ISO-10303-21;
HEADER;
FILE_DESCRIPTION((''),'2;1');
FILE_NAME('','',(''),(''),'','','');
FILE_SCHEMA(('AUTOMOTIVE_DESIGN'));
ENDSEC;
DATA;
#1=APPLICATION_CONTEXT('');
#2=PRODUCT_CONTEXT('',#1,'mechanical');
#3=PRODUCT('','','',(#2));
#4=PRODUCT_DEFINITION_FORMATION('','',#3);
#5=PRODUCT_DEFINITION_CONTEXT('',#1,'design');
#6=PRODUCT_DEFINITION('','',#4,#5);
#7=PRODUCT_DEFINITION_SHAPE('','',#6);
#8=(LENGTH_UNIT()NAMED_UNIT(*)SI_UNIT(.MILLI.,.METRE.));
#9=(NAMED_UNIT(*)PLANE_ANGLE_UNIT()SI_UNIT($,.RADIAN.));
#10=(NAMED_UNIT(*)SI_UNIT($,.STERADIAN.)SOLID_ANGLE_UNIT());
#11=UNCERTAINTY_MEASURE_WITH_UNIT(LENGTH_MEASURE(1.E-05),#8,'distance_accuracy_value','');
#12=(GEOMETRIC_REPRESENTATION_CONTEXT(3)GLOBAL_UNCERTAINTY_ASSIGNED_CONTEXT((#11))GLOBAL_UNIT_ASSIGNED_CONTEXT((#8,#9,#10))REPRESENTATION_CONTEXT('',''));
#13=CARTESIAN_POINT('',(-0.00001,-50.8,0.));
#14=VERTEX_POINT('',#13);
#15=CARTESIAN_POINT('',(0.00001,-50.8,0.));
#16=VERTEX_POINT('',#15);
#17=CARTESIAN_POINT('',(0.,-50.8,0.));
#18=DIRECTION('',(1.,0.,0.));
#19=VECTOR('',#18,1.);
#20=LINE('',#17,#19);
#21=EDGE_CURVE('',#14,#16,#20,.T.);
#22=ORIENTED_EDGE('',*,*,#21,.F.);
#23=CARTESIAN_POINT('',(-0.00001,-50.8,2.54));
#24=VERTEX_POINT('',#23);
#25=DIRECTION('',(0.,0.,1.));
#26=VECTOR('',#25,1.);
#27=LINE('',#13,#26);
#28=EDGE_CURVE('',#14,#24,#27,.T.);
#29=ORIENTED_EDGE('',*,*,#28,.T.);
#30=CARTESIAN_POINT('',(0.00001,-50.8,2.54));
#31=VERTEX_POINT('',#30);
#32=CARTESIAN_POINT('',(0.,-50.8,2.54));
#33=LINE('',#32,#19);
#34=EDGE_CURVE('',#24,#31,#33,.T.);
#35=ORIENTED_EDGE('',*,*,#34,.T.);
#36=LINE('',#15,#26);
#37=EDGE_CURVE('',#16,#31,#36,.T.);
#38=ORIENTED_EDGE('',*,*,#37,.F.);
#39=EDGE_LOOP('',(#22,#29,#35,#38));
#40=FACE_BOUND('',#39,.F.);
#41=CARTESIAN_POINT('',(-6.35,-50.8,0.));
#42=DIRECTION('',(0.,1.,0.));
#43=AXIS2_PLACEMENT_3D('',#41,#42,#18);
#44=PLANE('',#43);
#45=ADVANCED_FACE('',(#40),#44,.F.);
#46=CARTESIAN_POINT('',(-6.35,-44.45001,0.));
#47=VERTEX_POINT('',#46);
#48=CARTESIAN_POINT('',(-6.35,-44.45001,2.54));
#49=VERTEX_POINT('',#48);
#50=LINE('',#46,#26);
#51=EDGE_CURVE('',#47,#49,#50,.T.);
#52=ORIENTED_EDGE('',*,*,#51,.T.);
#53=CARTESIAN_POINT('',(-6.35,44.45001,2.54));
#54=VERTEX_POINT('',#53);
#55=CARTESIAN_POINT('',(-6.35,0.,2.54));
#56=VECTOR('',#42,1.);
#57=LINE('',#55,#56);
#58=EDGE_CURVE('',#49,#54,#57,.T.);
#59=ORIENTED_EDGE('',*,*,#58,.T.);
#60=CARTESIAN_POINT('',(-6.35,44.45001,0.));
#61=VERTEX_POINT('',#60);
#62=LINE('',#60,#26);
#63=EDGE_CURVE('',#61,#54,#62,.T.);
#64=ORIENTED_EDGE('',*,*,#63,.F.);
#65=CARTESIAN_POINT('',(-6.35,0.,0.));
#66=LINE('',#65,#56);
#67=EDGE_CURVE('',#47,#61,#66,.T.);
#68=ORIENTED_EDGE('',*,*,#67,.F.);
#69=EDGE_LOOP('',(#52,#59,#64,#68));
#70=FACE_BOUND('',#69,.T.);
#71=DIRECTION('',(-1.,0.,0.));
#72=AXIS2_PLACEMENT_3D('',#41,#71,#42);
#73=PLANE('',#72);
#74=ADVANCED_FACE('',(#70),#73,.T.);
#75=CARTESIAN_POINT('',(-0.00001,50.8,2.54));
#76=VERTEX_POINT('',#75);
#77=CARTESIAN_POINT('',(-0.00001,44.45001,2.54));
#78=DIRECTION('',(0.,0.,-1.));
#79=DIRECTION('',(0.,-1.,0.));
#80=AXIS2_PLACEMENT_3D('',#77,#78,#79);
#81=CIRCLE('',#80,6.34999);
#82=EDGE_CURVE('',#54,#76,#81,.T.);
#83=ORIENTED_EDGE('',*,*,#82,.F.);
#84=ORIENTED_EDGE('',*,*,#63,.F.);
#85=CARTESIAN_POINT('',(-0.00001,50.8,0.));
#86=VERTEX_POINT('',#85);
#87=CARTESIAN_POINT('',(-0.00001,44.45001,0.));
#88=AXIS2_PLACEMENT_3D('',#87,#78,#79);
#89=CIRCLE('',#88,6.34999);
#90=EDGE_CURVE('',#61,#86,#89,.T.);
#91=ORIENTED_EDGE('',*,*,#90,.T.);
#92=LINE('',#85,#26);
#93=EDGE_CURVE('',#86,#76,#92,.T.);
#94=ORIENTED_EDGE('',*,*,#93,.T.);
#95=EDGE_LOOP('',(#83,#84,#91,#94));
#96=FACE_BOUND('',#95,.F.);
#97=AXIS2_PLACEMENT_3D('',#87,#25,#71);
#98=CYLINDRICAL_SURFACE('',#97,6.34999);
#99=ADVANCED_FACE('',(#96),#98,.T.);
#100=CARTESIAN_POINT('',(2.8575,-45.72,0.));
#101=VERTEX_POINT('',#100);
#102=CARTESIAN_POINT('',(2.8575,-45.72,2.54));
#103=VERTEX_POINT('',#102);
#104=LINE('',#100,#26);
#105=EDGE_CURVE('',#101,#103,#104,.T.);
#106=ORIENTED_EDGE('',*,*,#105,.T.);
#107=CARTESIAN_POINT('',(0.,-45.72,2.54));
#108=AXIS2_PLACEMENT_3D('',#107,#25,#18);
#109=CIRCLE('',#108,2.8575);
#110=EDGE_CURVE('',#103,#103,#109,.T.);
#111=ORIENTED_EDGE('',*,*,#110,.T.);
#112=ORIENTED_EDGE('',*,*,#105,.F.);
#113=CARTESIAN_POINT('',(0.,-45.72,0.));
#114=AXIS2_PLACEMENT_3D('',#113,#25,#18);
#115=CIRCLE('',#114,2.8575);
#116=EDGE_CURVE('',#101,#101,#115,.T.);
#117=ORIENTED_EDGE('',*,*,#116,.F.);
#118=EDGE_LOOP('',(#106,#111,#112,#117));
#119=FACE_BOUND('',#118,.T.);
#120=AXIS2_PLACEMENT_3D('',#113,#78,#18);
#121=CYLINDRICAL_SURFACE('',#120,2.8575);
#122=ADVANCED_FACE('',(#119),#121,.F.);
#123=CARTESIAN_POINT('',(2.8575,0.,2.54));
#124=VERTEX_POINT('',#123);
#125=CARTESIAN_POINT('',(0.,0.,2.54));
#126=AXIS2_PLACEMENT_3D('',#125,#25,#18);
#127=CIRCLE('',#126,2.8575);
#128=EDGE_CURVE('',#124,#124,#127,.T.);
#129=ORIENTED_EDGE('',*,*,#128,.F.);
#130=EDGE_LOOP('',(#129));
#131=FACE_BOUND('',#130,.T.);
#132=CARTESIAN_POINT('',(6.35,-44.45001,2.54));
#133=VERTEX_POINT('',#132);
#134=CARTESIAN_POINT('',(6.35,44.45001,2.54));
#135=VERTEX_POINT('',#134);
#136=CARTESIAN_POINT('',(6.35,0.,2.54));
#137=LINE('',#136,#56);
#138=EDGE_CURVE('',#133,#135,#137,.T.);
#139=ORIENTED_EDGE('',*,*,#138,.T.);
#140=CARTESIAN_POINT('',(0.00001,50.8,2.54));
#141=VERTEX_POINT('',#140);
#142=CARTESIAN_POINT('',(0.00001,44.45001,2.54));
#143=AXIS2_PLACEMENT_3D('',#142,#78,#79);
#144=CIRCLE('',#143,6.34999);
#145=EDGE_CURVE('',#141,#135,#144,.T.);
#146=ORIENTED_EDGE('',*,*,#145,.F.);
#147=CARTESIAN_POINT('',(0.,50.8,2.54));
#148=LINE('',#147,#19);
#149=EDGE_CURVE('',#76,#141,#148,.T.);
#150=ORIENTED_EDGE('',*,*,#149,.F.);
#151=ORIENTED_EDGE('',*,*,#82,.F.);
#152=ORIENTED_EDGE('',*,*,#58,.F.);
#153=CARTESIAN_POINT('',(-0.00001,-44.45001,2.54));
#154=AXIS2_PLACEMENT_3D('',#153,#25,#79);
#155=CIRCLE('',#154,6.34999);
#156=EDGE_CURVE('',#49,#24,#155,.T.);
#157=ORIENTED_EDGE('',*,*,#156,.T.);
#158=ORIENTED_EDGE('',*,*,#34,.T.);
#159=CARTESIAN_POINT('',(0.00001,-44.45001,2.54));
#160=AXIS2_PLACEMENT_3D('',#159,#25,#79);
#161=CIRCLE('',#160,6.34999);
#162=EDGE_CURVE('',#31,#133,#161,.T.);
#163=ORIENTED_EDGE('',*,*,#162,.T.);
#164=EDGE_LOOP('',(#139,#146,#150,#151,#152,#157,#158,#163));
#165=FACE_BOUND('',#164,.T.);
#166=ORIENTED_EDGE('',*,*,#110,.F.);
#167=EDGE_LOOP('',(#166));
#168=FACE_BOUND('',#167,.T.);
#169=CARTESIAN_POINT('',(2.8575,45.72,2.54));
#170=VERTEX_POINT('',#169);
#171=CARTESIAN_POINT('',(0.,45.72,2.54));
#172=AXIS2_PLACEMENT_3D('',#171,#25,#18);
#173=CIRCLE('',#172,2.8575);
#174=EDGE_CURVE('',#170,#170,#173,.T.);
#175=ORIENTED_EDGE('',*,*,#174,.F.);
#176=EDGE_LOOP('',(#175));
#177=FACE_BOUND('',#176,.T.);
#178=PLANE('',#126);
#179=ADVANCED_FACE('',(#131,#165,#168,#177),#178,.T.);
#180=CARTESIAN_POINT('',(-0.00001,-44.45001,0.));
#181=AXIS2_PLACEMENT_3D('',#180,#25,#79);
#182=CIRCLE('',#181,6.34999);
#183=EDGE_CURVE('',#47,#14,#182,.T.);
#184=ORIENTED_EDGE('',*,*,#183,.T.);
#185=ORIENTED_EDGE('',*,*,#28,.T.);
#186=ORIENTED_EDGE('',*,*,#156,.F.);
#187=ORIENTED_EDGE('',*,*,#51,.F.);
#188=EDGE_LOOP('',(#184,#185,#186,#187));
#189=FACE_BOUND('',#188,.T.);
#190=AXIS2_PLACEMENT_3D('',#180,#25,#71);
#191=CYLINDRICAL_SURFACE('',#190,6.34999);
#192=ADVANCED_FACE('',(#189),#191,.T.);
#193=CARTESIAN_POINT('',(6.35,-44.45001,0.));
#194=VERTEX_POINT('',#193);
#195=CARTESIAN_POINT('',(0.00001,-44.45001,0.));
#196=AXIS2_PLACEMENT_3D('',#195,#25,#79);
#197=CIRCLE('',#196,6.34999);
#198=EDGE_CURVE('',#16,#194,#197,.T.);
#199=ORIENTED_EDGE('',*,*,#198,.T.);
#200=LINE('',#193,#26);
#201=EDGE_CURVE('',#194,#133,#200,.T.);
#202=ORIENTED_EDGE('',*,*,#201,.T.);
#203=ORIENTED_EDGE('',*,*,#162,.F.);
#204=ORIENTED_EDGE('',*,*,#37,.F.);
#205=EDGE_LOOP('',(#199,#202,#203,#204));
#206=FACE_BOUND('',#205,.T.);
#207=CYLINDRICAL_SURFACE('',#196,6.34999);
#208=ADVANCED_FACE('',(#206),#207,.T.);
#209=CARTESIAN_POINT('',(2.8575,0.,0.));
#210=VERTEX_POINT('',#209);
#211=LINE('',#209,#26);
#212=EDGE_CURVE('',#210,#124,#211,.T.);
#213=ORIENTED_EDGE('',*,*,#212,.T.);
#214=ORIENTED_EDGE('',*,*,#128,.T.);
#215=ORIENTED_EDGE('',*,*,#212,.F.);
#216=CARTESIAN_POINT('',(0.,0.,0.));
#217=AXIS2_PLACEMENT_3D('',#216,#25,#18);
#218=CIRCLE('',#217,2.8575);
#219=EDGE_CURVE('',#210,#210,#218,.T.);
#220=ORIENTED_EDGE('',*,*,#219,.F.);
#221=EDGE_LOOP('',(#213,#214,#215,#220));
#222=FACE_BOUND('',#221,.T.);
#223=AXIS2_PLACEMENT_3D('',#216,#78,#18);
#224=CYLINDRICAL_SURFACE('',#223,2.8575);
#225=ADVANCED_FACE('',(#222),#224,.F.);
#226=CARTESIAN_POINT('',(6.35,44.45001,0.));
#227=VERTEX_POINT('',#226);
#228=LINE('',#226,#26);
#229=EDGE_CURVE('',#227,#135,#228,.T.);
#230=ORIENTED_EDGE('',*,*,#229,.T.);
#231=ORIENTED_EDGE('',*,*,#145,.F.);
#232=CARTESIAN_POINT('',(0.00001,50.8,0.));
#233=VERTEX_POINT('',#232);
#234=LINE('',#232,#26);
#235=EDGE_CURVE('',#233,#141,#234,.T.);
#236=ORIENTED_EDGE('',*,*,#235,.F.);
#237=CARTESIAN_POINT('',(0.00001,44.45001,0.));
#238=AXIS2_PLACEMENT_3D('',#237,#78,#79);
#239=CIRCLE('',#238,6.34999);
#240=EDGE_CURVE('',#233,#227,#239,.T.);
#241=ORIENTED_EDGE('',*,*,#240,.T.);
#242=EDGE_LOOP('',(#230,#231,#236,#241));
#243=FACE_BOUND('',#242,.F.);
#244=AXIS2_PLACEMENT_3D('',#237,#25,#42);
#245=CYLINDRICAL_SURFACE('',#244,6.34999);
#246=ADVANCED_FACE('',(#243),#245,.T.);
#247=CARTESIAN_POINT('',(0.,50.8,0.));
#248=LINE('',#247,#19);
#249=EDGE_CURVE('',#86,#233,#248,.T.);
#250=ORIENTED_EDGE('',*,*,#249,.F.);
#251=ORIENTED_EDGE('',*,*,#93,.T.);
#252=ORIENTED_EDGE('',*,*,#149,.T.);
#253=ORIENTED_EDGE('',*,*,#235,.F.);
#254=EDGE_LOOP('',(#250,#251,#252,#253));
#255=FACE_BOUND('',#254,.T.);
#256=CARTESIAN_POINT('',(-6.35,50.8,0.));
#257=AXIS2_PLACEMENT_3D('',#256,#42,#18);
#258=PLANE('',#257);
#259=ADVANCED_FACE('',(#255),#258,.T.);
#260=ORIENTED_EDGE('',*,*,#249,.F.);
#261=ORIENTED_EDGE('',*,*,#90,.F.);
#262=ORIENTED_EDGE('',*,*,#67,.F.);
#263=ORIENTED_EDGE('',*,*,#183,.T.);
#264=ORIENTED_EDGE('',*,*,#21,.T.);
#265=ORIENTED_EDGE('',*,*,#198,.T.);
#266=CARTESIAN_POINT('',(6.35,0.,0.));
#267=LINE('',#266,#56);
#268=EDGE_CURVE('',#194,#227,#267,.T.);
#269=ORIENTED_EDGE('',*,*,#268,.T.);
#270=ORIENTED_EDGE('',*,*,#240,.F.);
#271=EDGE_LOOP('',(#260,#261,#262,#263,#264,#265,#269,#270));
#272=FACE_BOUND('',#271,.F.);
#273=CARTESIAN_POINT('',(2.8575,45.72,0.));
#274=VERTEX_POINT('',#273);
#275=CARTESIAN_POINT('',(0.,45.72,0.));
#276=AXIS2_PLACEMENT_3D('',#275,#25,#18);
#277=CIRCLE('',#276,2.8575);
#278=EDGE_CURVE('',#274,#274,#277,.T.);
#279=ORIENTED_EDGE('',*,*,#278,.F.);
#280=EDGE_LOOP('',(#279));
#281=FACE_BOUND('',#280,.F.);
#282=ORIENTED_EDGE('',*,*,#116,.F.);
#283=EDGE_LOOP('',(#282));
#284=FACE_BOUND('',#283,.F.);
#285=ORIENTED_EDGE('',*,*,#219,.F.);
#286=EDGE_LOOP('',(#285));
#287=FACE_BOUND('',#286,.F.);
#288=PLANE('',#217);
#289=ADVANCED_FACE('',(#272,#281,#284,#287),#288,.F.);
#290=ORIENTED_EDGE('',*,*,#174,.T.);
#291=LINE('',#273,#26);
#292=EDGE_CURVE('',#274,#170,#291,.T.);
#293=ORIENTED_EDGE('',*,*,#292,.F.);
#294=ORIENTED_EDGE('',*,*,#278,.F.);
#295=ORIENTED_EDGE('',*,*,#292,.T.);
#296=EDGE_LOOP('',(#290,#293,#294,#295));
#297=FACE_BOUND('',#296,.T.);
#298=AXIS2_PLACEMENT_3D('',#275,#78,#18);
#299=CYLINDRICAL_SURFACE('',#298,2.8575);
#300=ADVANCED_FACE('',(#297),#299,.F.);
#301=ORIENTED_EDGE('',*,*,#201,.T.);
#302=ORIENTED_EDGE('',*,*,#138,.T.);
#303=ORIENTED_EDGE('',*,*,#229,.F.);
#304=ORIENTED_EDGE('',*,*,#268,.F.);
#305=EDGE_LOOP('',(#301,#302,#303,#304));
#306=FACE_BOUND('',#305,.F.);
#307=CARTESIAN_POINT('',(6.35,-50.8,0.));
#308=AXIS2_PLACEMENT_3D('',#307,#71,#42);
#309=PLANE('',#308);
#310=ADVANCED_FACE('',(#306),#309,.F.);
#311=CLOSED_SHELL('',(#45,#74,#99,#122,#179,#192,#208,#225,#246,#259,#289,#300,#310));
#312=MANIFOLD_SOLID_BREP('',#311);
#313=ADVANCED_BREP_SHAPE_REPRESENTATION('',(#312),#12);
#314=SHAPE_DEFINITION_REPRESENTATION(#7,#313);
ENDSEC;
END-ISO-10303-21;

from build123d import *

# Parameters (mm, degrees)
F0_W     = 12.7
F0_H     = 101.6
F0_R     = 2.8575
F1_DEPTH = 2.54
F2_R     = 6.34999


# Not quite as in the source:
# - a fillet or chamfer is up to 0.001 mm smaller than in the source, because OpenCascade refuses the exact size


with BuildPart() as f1:
    # F0 (on Top) → F1 (new body)
    with BuildSketch(Plane.XY):
        Rectangle(F0_W, F0_H)
        with Locations((0, -45.72)):
            Circle(F0_R, mode=Mode.SUBTRACT)
        Circle(F0_R, mode=Mode.SUBTRACT)
        with Locations((0, 45.72)):
            Circle(F0_R, mode=Mode.SUBTRACT)
    extrude(amount=F1_DEPTH)

    # F2 (radius 6.35 in the source; OpenCascade refuses exactly that, so slightly less here)
    f2_edges = [f1.edges().sort_by_distance(p)[0] for p in [
        (6.35, -50.8, 1.27),
        (-6.35, -50.8, 1.27),
        (6.35, 50.8, 1.27),
        (-6.35, 50.8, 1.27),
    ]]
    fillet(f2_edges, radius=F2_R)


solid = f1.part
